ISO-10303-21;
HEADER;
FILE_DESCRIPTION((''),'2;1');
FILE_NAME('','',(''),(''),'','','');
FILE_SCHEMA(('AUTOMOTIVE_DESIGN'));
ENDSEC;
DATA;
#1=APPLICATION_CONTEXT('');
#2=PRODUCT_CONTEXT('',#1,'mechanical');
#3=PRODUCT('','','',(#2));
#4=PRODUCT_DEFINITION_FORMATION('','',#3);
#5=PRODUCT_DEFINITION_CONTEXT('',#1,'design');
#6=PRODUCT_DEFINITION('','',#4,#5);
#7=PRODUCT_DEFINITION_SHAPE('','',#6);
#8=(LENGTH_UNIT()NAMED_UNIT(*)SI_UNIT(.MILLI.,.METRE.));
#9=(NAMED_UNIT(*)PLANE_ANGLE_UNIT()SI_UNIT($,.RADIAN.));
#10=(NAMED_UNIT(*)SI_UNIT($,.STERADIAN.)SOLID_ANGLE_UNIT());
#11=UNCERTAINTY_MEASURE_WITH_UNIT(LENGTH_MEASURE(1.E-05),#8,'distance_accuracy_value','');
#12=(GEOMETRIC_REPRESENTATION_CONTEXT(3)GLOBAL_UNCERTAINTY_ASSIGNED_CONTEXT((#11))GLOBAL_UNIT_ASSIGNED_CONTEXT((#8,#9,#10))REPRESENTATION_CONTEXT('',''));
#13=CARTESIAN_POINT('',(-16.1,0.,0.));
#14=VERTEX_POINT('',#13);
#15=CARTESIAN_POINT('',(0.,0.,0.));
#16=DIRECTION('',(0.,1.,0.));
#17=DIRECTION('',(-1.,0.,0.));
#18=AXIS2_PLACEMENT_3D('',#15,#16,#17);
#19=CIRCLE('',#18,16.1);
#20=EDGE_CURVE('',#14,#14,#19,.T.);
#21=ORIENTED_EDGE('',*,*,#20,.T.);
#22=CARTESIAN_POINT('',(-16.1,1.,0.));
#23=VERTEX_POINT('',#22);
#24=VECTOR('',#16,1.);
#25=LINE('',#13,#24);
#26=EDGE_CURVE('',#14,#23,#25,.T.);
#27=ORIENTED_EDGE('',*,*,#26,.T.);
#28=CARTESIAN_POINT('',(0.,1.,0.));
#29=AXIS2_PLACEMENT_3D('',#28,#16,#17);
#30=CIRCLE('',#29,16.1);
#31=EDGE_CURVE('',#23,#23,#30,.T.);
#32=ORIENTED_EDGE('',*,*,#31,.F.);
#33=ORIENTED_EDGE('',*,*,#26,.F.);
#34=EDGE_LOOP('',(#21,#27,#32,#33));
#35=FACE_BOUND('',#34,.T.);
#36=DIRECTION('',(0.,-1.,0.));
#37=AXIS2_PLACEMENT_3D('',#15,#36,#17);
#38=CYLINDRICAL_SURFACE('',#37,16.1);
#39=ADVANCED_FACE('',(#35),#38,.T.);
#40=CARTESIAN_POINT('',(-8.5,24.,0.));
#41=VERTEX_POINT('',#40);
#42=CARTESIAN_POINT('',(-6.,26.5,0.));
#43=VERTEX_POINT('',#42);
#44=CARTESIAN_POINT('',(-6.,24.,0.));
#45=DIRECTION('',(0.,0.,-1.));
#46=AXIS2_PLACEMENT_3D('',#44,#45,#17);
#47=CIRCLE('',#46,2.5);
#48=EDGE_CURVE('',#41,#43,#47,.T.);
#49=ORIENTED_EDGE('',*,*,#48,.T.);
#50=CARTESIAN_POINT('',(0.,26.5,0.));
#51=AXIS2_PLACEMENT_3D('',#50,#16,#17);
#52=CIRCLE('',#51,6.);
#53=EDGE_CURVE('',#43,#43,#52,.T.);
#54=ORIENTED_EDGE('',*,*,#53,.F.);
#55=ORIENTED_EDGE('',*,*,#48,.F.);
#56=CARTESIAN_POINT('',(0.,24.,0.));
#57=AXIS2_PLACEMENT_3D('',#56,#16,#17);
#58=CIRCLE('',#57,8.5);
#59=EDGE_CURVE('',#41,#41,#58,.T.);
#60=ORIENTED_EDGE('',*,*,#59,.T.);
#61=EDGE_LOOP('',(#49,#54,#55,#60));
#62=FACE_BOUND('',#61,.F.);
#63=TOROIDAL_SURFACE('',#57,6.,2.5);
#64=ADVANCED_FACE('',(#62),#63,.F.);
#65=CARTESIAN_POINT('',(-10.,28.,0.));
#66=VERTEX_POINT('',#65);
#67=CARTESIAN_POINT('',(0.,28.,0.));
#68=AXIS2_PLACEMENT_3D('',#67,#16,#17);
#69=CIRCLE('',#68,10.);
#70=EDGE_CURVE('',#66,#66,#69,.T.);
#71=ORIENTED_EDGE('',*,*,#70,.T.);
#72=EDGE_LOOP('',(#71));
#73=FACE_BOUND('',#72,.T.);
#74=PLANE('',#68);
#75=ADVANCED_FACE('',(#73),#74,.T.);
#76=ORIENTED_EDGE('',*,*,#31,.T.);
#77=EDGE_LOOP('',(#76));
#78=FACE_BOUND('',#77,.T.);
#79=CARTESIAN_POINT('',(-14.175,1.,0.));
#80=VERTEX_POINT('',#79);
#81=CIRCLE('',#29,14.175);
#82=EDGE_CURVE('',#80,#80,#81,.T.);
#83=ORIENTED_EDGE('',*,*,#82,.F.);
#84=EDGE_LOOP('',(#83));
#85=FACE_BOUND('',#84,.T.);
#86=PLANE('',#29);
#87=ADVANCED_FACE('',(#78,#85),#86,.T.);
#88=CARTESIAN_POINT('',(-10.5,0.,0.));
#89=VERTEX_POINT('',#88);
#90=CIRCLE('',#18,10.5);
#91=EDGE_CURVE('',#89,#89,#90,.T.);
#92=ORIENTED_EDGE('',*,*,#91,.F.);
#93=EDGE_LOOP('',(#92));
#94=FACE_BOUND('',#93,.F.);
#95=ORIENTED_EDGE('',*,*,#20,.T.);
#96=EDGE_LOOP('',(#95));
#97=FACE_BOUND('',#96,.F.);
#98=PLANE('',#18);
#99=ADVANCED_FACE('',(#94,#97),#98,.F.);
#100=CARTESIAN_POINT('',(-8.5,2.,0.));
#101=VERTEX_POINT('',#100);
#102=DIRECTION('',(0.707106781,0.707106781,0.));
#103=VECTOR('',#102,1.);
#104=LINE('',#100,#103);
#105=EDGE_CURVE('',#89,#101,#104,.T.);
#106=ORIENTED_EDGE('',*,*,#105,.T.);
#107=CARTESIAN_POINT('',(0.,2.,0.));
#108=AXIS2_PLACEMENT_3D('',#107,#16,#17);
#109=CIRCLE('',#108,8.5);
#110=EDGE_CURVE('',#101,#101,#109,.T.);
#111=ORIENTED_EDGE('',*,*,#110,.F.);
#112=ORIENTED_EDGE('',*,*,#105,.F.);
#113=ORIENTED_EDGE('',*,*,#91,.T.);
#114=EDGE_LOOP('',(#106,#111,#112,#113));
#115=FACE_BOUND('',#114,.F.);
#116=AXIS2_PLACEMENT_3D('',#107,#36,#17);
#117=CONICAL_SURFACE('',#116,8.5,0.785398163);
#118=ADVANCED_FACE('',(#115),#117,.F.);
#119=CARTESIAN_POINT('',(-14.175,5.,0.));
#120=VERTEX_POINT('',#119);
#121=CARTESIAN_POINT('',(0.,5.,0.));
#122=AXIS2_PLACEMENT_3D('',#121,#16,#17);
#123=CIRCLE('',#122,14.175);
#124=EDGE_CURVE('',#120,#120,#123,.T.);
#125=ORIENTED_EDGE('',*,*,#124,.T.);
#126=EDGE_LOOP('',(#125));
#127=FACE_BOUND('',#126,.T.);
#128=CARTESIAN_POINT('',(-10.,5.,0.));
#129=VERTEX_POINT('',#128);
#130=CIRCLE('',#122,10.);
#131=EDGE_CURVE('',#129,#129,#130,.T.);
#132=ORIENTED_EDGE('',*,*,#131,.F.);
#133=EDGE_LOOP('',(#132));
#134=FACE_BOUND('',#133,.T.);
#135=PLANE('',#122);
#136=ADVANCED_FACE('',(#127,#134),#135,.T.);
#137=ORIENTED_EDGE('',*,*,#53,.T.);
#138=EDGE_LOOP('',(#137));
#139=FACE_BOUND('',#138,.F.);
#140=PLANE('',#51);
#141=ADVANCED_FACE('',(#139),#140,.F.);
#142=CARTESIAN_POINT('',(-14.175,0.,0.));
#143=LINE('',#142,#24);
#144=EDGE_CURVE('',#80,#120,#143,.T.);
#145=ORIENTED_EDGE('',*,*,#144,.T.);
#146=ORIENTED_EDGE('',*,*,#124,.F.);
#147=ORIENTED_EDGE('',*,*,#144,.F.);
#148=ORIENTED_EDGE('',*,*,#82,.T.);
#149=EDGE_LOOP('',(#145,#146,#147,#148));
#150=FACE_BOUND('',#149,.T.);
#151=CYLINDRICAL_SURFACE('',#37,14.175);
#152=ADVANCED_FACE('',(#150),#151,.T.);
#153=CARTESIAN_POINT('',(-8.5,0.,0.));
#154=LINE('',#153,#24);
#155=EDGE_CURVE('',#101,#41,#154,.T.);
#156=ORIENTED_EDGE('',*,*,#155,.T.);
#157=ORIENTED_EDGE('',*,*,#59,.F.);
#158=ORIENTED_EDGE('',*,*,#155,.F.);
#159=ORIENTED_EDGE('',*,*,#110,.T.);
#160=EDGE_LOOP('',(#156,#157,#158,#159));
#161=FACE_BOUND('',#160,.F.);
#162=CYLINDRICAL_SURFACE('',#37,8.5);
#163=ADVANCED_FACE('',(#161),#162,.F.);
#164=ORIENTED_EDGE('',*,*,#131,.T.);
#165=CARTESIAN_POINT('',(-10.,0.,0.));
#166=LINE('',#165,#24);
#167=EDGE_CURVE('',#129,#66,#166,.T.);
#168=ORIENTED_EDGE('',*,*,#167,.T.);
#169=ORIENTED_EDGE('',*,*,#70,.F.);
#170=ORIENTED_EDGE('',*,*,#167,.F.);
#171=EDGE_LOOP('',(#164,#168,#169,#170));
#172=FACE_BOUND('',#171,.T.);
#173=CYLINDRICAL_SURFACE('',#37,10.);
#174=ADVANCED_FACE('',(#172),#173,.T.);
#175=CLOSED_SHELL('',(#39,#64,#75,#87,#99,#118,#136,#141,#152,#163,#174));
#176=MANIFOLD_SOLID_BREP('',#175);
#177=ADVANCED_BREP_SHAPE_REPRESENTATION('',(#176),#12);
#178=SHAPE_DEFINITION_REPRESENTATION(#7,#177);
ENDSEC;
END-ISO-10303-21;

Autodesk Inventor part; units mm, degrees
ref_plane "YZ Plane" through (0, 0, 0) normal (1, 0, 0) x (0, 1, 0)
ref_plane "XZ Plane" through (0, 0, 0) normal (0, 1, 0) x (-1, 0, 0)
ref_plane "XY Plane" through (0, 0, 0) normal (0, 0, 1) x (1, 0, 0)
sketch "Náčrt1" plane through (0, 0, 0) normal (0, 1, 0) x (-1, 0, 0)
  circle A0 centre (0, 0) radius 14.175
  circle A1 centre (0, 0) radius 16.1
  circle A2 centre (0, 0) radius 10
  circle A3 centre (0, 0) radius 8.5
  dimension "d0" = 28.35
  dimension "d1" = 32.2
  dimension "d2" = 20
  dimension "d3" = 1.5
extrude "Vysunutí1" add sketch "Náčrt1" along normal blind 1 contours A1
extrude "Vysunutí2" add sketch "Náčrt1" along normal blind 5 contours A0
extrude "Vysunutí3" add sketch "Náčrt1" along normal blind 28 contours A2 | A3
extrude "Vysunutí4" cut sketch "Náčrt1" along normal blind 26.5 contours A3
chamfer "Zkosení1" distance 2 angle 45 1 edges at (8.5, 0, 0)
fillet "Zaoblení1" radius 2.5 1 edges at (8.5, 26.5, 0)
properties part number "D28_Form"
